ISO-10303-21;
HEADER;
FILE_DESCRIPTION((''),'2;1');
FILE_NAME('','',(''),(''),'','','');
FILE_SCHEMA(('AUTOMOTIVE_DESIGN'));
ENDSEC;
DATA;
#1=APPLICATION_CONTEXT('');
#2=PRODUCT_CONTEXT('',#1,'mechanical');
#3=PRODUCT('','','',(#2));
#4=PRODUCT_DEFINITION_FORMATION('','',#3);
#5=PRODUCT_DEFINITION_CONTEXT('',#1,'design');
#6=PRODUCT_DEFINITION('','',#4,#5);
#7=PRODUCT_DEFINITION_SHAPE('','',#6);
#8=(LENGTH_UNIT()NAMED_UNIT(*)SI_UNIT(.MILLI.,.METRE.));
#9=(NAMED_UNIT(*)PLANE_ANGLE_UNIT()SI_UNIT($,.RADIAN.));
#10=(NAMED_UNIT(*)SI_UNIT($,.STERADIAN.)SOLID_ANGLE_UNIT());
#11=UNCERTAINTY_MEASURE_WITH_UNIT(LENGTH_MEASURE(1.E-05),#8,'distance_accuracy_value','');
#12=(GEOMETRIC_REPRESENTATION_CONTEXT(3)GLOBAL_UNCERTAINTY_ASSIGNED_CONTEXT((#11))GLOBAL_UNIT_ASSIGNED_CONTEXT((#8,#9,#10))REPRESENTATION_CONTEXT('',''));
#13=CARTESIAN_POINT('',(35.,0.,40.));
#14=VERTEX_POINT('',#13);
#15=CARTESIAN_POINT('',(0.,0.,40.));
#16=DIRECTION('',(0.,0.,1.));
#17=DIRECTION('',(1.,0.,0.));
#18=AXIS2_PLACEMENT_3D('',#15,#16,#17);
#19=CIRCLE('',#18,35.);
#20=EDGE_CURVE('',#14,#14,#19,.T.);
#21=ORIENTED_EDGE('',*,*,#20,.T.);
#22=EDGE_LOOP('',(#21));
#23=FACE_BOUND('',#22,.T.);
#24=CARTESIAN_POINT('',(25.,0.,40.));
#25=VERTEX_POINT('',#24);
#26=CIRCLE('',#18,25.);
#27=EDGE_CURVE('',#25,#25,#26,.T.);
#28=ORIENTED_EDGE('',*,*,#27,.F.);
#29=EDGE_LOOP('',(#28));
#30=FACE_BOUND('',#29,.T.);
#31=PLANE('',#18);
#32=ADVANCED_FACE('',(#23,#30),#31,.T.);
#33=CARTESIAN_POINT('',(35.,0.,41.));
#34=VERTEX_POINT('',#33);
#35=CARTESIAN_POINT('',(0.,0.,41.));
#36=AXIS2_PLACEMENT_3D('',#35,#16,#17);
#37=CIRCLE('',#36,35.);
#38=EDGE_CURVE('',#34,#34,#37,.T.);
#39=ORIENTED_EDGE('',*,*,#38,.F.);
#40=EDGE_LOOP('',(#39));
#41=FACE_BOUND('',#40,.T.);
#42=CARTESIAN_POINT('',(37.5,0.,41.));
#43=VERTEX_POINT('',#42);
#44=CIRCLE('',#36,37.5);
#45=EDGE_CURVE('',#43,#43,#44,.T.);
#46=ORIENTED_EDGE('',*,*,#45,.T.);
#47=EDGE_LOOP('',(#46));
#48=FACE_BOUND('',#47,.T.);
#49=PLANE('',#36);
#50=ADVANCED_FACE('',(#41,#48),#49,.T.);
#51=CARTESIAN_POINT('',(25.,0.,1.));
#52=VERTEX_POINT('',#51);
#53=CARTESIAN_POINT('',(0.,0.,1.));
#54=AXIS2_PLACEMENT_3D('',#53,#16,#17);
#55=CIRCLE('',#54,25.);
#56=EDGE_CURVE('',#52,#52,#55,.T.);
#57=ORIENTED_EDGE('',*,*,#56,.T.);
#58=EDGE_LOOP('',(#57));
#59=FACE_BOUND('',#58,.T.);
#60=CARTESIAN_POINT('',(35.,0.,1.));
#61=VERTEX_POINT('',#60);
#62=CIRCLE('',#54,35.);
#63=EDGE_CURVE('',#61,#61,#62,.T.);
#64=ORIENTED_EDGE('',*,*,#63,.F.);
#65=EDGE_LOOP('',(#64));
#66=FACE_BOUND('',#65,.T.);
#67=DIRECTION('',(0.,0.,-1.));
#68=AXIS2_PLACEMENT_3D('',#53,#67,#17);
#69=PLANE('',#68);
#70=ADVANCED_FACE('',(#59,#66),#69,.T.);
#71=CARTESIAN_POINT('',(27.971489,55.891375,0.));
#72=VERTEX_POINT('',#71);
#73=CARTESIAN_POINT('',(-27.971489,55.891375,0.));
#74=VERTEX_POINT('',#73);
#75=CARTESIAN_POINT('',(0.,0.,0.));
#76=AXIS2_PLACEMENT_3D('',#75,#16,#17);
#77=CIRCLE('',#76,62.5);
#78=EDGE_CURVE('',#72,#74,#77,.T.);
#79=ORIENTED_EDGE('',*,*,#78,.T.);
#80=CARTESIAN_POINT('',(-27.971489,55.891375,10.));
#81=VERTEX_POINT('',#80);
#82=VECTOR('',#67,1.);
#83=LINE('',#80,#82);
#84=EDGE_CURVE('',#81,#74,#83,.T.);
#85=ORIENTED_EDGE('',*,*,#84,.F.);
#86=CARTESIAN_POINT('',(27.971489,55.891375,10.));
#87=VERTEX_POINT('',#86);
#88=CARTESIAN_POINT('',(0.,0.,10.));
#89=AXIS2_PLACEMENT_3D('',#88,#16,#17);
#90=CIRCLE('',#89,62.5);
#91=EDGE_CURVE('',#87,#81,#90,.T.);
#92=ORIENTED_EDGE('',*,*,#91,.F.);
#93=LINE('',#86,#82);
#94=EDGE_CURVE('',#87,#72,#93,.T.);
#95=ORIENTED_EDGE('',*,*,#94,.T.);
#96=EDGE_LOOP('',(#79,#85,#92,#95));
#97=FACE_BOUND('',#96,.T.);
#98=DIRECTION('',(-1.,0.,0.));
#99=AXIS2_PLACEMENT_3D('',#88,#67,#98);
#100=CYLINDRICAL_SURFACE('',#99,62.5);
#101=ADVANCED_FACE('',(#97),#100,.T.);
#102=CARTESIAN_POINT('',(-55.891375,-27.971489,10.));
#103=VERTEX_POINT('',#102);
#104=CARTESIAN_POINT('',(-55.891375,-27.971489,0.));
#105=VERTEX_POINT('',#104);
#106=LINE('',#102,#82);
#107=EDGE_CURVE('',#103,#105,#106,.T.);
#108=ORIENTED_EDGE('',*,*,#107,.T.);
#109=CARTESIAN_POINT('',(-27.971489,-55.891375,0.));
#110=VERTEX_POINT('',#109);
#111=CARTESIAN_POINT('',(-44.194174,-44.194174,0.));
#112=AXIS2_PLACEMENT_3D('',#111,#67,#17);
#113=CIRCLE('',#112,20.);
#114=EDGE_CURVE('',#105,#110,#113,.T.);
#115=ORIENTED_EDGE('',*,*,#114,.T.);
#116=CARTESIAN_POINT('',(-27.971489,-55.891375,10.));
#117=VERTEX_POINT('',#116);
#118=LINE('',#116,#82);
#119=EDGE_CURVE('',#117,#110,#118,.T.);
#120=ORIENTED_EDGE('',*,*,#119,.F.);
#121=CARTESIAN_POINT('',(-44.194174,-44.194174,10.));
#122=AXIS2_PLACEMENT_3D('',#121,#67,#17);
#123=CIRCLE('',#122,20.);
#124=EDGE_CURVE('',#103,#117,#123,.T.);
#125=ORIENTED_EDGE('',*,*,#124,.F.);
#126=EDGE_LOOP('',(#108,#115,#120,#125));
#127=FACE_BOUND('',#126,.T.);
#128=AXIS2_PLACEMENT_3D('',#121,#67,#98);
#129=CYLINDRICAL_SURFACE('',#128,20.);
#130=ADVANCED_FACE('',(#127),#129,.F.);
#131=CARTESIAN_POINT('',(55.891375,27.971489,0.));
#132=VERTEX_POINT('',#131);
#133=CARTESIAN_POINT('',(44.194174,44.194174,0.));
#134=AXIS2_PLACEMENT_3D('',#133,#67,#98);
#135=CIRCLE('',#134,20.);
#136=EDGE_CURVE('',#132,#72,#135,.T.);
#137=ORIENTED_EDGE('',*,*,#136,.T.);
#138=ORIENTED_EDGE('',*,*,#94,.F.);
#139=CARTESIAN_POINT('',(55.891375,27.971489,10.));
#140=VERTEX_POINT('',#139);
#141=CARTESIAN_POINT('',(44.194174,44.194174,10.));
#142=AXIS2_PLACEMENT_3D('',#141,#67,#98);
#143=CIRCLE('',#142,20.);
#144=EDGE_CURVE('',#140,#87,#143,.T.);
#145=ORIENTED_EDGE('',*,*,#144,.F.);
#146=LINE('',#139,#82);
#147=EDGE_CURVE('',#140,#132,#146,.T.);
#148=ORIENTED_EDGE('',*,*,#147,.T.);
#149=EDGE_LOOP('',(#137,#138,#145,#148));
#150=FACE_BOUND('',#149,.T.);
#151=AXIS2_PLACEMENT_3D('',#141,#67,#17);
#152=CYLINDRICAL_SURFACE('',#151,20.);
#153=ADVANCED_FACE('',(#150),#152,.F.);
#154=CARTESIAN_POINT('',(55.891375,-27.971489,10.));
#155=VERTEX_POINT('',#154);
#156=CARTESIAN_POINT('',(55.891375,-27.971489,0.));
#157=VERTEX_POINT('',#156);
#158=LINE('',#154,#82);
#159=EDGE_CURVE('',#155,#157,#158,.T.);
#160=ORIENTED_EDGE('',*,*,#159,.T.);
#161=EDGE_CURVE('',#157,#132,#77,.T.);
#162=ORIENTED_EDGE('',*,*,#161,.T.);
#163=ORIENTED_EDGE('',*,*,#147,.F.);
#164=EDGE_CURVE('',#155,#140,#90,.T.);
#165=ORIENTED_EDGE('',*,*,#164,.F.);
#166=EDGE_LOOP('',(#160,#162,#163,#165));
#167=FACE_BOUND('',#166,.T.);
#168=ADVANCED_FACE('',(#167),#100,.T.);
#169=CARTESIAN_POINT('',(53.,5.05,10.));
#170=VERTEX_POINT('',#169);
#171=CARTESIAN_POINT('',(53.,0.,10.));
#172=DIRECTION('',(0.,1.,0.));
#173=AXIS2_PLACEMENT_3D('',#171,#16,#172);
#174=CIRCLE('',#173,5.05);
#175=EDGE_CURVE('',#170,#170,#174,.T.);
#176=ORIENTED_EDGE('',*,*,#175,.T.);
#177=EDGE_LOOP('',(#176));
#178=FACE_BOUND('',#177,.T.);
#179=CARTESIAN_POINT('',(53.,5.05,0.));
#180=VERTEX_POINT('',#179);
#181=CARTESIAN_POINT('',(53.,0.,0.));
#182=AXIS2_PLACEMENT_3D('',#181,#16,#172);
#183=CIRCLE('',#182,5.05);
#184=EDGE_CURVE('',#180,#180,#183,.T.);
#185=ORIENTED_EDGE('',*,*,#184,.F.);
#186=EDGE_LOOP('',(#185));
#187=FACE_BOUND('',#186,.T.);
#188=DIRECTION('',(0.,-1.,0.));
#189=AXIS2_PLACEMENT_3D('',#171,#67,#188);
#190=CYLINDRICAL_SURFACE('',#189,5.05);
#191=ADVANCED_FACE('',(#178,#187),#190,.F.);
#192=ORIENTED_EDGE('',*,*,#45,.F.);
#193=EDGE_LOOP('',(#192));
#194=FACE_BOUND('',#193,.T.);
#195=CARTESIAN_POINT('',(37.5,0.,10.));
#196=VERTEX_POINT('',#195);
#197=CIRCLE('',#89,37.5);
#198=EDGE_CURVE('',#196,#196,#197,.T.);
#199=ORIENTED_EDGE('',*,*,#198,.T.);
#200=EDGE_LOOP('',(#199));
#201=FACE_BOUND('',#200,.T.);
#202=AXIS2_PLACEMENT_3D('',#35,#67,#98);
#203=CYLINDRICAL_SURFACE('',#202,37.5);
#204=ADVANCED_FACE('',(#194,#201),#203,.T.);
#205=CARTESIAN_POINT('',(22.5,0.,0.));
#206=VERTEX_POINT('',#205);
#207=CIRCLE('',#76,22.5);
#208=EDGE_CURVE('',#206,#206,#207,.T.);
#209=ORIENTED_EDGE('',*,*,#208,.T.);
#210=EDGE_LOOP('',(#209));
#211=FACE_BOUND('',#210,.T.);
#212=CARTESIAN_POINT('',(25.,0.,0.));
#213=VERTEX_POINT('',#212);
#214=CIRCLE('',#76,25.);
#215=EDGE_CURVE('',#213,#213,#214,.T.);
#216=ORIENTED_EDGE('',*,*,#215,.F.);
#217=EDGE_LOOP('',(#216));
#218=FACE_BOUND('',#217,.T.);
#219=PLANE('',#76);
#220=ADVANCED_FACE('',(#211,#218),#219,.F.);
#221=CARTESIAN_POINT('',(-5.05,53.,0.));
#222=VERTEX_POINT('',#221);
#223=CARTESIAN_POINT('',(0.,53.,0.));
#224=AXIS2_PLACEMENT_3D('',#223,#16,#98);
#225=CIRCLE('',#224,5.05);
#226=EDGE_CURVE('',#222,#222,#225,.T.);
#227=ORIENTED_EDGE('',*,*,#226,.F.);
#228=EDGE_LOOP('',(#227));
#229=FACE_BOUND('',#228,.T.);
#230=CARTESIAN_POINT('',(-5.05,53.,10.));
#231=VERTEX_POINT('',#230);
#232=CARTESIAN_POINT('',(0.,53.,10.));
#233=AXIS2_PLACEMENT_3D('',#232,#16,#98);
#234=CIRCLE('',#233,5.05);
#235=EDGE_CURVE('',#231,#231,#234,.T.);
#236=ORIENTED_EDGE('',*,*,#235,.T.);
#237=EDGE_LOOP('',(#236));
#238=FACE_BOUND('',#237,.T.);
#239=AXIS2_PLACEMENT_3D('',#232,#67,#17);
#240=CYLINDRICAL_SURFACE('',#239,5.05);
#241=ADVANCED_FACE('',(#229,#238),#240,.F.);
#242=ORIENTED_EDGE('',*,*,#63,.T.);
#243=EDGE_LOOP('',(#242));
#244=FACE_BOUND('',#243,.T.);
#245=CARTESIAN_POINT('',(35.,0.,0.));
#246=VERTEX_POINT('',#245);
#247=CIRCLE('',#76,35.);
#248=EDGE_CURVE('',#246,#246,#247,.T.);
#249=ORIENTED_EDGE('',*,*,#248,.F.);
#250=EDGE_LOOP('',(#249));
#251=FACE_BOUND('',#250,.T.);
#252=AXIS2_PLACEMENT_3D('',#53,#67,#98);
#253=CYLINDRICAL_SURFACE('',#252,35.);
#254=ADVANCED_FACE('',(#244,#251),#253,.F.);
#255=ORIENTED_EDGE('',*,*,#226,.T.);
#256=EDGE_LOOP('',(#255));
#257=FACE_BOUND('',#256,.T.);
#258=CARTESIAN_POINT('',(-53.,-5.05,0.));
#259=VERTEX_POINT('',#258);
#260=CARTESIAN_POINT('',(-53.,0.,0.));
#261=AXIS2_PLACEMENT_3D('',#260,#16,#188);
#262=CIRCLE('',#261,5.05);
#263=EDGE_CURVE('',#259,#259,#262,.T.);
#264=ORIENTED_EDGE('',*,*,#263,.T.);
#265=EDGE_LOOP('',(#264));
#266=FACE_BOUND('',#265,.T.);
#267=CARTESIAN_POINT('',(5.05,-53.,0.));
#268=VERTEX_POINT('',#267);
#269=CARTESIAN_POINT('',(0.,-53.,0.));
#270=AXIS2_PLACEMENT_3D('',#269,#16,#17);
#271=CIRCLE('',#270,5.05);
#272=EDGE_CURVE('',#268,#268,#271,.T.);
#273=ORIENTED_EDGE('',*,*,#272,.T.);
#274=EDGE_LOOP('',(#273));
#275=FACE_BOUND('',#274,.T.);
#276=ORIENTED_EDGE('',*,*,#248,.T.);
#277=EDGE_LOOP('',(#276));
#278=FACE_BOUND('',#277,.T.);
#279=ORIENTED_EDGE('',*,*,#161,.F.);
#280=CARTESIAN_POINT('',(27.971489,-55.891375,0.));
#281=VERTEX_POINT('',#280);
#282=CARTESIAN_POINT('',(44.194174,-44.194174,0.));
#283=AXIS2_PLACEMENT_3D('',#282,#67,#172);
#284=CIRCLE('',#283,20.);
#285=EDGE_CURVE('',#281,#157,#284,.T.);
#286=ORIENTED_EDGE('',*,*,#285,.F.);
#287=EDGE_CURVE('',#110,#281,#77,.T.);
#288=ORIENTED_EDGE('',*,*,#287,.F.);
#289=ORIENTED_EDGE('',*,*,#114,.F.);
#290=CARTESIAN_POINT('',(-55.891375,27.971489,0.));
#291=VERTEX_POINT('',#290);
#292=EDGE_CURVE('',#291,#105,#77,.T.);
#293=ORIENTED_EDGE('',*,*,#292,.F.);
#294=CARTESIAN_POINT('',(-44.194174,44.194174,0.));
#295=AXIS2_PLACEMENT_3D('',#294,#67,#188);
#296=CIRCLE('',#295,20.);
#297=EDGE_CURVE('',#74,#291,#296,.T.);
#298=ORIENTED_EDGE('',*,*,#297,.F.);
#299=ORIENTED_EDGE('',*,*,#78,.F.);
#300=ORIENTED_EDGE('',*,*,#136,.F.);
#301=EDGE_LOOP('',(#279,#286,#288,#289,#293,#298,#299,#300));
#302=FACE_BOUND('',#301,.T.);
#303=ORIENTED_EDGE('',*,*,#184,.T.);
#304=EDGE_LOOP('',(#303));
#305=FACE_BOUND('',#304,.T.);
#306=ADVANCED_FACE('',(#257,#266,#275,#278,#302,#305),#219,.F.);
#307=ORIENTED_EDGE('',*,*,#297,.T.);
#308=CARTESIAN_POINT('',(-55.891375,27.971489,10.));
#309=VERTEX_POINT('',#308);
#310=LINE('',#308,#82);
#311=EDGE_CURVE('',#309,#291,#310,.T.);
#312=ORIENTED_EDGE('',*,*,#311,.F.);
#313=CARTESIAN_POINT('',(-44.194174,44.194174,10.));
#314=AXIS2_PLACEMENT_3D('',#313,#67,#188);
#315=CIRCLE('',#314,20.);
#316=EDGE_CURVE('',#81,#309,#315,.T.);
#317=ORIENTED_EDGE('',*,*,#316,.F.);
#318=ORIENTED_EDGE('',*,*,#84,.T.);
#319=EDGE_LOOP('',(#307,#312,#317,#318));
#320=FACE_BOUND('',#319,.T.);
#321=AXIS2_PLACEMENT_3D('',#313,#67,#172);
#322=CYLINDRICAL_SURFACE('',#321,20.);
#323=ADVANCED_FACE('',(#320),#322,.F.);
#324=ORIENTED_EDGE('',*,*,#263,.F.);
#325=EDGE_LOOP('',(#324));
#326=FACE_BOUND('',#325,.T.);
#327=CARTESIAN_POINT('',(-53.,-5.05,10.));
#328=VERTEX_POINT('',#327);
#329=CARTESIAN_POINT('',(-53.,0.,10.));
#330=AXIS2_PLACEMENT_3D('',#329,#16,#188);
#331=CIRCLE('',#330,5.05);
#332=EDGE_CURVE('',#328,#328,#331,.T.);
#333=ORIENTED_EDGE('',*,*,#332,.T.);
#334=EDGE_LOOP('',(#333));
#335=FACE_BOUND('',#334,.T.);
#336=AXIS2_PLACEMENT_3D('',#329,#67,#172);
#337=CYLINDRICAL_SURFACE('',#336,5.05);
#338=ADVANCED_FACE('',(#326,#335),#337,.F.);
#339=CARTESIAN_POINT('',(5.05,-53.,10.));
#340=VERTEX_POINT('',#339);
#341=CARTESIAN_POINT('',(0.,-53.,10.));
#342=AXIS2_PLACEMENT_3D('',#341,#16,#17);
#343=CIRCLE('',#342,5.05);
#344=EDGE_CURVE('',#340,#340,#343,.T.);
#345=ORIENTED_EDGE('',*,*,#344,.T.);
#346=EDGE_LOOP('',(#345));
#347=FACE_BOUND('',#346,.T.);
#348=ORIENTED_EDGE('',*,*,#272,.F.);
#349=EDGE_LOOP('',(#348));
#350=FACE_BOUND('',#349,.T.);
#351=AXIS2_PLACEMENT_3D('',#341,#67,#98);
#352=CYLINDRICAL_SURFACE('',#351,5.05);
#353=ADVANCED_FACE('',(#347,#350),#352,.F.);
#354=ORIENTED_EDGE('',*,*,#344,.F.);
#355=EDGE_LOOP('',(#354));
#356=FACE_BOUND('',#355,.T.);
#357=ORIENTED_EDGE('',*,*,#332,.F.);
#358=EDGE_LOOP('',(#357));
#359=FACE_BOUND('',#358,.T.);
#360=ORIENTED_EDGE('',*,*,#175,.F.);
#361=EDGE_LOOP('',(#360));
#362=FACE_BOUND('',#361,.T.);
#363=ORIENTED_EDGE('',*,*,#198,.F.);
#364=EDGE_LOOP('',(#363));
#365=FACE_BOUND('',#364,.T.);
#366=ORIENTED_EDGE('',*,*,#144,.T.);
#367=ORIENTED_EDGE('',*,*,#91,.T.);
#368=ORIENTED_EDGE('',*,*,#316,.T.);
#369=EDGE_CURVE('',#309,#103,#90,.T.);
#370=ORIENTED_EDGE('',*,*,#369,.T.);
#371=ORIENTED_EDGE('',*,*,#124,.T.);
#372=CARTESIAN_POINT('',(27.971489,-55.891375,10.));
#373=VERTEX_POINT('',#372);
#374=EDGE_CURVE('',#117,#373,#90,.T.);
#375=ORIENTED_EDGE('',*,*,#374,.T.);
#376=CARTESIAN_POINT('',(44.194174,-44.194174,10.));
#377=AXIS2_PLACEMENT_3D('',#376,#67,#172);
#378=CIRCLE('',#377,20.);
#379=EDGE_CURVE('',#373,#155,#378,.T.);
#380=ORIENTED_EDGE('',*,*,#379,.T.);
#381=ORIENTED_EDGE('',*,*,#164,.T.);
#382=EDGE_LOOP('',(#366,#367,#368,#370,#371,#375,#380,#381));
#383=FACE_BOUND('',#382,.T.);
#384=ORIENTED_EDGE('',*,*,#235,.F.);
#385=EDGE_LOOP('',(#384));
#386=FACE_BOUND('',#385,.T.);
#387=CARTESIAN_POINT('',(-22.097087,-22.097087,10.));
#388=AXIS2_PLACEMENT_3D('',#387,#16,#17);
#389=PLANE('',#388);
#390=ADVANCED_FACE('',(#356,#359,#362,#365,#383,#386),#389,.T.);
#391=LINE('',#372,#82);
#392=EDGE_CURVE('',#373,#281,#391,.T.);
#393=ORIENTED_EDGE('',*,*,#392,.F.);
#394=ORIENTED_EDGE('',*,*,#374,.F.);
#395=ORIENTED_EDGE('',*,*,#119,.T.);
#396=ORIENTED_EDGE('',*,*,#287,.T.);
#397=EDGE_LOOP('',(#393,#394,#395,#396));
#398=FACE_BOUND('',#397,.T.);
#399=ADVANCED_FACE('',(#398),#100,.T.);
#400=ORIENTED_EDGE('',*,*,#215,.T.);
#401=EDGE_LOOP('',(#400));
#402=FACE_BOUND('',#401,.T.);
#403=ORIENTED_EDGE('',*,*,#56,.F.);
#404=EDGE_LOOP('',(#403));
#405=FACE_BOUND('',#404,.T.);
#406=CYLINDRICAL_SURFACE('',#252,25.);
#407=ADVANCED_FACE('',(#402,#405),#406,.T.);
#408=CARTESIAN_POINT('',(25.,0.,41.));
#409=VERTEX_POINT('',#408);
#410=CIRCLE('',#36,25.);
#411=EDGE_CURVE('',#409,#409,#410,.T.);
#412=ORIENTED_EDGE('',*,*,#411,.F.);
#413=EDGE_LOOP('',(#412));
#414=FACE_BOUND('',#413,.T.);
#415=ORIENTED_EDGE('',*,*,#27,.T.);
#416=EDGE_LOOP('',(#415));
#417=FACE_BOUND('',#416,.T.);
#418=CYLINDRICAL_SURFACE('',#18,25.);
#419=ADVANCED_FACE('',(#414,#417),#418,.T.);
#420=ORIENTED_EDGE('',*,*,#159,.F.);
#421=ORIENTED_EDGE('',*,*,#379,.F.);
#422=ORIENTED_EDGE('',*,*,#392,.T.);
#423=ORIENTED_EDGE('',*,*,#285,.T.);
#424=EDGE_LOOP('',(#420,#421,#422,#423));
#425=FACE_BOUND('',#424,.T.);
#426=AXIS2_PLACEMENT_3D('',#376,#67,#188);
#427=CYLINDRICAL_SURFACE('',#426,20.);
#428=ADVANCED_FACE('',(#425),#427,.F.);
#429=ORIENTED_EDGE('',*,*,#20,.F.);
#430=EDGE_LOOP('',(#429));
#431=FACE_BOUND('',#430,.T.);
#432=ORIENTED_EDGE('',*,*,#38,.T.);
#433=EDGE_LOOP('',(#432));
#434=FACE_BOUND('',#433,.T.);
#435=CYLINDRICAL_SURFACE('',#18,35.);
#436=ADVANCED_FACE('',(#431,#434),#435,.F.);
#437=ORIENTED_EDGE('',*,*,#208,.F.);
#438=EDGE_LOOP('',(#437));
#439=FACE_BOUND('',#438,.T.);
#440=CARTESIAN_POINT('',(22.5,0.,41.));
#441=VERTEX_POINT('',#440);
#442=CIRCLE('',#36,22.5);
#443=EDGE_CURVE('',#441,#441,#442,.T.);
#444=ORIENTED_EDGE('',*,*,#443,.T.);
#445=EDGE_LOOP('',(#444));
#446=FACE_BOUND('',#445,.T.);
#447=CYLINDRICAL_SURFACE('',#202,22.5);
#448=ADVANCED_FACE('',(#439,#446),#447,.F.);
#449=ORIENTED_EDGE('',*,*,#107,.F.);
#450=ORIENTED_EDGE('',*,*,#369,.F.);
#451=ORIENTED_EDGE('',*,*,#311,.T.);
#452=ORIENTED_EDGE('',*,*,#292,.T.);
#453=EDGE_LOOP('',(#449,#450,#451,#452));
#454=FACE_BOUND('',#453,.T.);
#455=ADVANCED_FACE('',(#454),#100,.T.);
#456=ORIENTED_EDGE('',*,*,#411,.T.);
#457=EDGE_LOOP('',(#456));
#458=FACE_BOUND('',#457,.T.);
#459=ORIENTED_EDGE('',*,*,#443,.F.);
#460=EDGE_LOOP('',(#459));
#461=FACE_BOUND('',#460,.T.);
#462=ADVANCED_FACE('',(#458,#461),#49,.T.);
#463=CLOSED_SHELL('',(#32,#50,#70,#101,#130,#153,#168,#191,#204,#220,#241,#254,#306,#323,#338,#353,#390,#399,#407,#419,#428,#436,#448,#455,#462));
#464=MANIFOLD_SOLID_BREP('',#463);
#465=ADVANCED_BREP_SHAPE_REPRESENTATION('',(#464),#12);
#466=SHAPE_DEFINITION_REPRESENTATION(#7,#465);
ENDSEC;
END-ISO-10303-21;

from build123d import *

# Parameters (mm, degrees)
SZKIC1_R                    = 37.5
SZKIC1_R_2                  = 22.5
DODANIE_WYCI_GNI_CIE1_DEPTH = 41
SZKIC2_R                    = 35
SZKIC2_R_2                  = 25
WYTNIJ_WYCI_GNI_CIE1_DEPTH  = 1
SZKIC3_R                    = 5.05
SZKIC3_R_2                  = 37.5
DODANIE_WYCI_GNI_CIE2_DEPTH = 10
SZYK_KO_OWY1_OUTLINE_R      = 5.05
SZYK_KO_OWY1_DEPTH          = 10


# Read off the part's stored shape, not the designer's step: Szyk kołowy1
with BuildPart() as part:
    # Szkic1 → Dodanie-wyciągnięcie1 (new body)
    with BuildSketch(Plane.XY):
        Circle(SZKIC1_R)
        Circle(SZKIC1_R_2, mode=Mode.SUBTRACT)
    extrude(amount=DODANIE_WYCI_GNI_CIE1_DEPTH)

    # Szkic2 → Wytnij-wyciągnięcie1 (cut)
    with BuildSketch(Plane.XY.offset(41)):
        Circle(SZKIC2_R)
        Circle(SZKIC2_R_2, mode=Mode.SUBTRACT)
    wytnij_wyci_gni_cie1 = extrude(amount=-WYTNIJ_WYCI_GNI_CIE1_DEPTH, mode=Mode.SUBTRACT)

    # Lustro1: Wytnij-wyciągnięcie1 across plane
    add(wytnij_wyci_gni_cie1.mirror(Plane.XY.offset(20.5)), mode=Mode.SUBTRACT)

    # Szkic3 → Dodanie-wyciągnięcie2 (add)
    with BuildSketch(Plane.XY):
        with BuildLine():
            ThreePointArc((-27.971489431, -55.891374818), (44.194173824, 44.194173824), (-55.891374818, -27.971489431))
            ThreePointArc((-55.891374818, -27.971489431), (-30.0520382, -30.0520382), (-27.971489431, -55.891374818))
        make_face()
        with Locations((0, -53)):
            Circle(SZKIC3_R, mode=Mode.SUBTRACT)
        Circle(SZKIC3_R_2, mode=Mode.SUBTRACT)
    extrude(amount=DODANIE_WYCI_GNI_CIE2_DEPTH)

    # Szyk kołowy1 outline → Szyk kołowy1 (cut)
    with BuildSketch(Plane.XY):
        with Locations((-53, 0)):
            Circle(SZYK_KO_OWY1_OUTLINE_R)
        with BuildLine():
            ThreePointArc((-55.891374818, 27.971489431), (-30.0520382, 30.0520382), (-27.971489431, 55.891374818))
            ThreePointArc((-27.971489431, 55.891374818), (-44.194173824, 44.194173824), (-55.891374818, 27.971489431))
        make_face()
        with BuildLine():
            ThreePointArc((27.971489431, -55.891374818), (44.194173824, -44.194173824), (55.891374818, -27.971489431))
            ThreePointArc((55.891374818, -27.971489431), (30.0520382, -30.0520382), (27.971489431, -55.891374818))
        make_face()
        with BuildLine():
            ThreePointArc((55.891374818, 27.971489431), (44.194173824, 44.194173824), (27.971489431, 55.891374818))
            ThreePointArc((27.971489431, 55.891374818), (30.0520382, 30.0520382), (55.891374818, 27.971489431))
        make_face()
        with Locations((0, 53)):
            Circle(SZYK_KO_OWY1_OUTLINE_R)
        with Locations((53, 0)):
            Circle(SZYK_KO_OWY1_OUTLINE_R)
    extrude(amount=SZYK_KO_OWY1_DEPTH, mode=Mode.SUBTRACT)


solid = part.part
